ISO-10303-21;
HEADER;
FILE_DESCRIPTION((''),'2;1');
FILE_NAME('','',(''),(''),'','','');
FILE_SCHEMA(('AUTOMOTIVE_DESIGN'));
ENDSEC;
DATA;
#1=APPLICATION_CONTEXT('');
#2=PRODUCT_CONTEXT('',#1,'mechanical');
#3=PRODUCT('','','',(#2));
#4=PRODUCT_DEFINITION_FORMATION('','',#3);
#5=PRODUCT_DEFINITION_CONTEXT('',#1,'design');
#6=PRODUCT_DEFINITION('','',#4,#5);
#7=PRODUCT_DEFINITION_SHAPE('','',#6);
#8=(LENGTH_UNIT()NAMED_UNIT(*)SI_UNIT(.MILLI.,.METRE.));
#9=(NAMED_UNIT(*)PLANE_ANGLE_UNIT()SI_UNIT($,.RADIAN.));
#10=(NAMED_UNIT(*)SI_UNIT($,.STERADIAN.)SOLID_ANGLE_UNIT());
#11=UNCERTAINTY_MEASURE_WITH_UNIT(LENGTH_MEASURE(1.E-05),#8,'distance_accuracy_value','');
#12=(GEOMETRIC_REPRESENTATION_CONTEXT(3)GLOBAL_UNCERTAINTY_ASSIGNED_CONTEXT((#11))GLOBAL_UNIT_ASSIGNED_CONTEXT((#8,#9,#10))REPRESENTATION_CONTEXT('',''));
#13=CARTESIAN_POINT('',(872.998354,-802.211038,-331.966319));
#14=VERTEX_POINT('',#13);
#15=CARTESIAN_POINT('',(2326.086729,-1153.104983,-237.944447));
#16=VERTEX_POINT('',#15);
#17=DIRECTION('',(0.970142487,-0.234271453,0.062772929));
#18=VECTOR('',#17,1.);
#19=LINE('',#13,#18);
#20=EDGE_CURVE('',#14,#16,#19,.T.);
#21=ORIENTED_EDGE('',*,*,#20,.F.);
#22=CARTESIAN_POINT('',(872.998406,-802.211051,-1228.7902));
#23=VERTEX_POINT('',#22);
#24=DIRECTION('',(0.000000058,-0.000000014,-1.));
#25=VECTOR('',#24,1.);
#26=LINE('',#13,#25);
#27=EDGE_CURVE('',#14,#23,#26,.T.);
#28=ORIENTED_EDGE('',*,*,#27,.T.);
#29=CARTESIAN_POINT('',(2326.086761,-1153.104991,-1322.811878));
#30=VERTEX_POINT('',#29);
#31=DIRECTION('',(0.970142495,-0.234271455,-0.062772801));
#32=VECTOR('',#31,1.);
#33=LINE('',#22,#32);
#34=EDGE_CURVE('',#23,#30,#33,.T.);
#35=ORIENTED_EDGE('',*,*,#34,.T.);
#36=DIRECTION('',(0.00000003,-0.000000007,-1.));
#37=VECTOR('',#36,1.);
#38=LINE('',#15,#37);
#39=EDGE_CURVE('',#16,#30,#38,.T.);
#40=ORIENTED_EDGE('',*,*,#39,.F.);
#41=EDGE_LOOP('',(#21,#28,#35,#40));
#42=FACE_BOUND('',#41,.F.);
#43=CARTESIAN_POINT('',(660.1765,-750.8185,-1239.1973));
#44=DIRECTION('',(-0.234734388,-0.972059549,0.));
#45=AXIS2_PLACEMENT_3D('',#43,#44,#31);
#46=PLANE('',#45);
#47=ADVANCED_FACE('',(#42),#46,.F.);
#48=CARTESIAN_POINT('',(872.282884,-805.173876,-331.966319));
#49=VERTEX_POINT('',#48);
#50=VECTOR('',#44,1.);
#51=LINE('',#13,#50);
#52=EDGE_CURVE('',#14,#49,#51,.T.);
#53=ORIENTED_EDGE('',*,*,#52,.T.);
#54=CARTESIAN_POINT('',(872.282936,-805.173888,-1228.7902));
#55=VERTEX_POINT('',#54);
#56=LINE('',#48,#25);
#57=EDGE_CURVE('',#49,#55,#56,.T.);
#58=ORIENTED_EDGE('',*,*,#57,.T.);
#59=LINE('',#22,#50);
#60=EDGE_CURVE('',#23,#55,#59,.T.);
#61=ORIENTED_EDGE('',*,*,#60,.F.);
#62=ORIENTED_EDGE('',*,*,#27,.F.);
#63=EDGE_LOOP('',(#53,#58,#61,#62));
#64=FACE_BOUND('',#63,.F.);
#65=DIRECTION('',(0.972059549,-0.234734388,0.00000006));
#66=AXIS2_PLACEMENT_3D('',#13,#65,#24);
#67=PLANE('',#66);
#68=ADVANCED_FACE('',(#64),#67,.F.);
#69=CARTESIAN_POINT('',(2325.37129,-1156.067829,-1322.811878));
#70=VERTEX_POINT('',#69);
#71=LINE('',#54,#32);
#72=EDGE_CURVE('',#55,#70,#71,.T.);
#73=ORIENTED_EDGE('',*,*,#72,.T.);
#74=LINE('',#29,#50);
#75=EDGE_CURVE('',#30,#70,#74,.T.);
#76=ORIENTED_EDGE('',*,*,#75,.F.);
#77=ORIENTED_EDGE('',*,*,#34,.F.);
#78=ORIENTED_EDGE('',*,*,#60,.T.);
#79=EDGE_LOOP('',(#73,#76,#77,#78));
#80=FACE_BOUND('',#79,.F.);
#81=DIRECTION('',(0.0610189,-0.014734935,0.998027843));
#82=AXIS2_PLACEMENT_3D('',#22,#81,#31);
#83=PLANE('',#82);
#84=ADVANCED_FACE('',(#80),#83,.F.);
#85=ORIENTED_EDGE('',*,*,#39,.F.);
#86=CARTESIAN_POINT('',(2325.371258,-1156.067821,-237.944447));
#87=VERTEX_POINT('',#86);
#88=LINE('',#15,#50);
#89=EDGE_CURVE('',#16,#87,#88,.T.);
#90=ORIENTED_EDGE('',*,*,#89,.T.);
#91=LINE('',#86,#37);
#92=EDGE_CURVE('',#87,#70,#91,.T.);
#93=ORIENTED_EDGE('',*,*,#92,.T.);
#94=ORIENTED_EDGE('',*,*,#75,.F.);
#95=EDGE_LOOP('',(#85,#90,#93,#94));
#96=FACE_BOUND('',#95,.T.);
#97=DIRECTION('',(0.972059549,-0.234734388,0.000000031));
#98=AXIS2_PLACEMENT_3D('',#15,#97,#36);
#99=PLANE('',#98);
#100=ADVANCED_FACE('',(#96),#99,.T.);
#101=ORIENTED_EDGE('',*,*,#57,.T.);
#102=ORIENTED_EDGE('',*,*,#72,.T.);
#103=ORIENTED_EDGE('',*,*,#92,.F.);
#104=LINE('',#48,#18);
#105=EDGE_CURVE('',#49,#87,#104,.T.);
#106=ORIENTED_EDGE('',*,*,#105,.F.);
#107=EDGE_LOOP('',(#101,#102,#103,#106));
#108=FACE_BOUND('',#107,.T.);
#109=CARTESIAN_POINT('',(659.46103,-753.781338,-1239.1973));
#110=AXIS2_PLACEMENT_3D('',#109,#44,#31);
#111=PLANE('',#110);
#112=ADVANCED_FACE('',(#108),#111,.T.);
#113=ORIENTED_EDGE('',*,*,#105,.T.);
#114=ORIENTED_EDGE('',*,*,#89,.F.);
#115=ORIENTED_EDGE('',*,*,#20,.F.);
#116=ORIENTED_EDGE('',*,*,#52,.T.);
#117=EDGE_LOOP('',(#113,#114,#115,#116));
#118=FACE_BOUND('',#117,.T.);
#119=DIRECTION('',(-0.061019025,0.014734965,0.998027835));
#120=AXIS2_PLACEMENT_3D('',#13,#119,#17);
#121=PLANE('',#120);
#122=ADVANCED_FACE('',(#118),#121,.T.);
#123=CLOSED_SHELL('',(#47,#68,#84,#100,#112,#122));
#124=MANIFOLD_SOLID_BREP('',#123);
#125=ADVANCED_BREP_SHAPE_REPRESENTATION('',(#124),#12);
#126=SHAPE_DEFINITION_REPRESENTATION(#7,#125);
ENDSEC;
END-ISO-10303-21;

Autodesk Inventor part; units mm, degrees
ref_plane "YZ Plane" through (0, 0, 0) normal (1, 0, 0) x (0, 1, 0)
ref_plane "XZ Plane" through (0, 0, 0) normal (0, 1, 0) x (-1, 0, 0)
ref_plane "XY Plane" through (0, 0, 0) normal (0, 0, 1) x (1, 0, 0)
ref_plane "Work Plane1" through (660.1765, -750.8185, -321.5593) normal (0.2347344, 0.9720596, 0) x (0.9701425, -0.2342714, 0.0627728)
ref_plane "Work Plane2" through (660.1765, -750.8185, -1239.1973) normal (-0.2347344, -0.9720596, 0) x (0.9701425, -0.2342714, -0.0627728)
sketch "Sketch1" plane through (660.1765, -750.8185, -1239.1973) normal (-0.2347344, -0.9720596, 0) x (0.9701425, -0.2342714, -0.0627728)
  line L0 (1695.5374, 1112.9167) -> (113.5836, 913.1264) construction
  line L1 (217.7912, 25.13) -> (161.6208, 918.1852) construction
  line L2 (1764.0187, 24.13) -> (169.4987, 24.13) construction
  line L3 (1647.626, 1105.8579) -> (1715.6004, 25.13) construction
  line L4 (1647.5631, 1106.8579) -> (1715.6633, 24.13)
  line L5 (161.5579, 919.1852) -> (217.8541, 24.13)
  line L6 (217.8541, 24.13) -> (1715.6633, 24.13)
  line L7 (161.5579, 919.1852) -> (1647.5631, 1106.8579)
  point P0 (-894.1485, 1185.4069)
extrude "Plate1" add sketch "Sketch1" along normal blind 3.048
equation "\"d0\" = Thickness"
equation "\"BendRadius\" = Thickness"
equation "\"BendReliefWidth\" = Thickness"
equation "\"BendReliefDepth\" = 0.5 * Thickness"
equation "\"CornerReliefSize\" = 4 * Thickness"
equation "\"MinimumRemnant\" = 2 * Thickness"
equation "\"TransitionRadius\" = BendRadius"
equation "\"JacobiRadiusSize\" = BendRadius"
equation "\"GapSize\" = Thickness"
equation "\"Thickness\" = 3.048"
properties part number "CE-5.2.3-02"
